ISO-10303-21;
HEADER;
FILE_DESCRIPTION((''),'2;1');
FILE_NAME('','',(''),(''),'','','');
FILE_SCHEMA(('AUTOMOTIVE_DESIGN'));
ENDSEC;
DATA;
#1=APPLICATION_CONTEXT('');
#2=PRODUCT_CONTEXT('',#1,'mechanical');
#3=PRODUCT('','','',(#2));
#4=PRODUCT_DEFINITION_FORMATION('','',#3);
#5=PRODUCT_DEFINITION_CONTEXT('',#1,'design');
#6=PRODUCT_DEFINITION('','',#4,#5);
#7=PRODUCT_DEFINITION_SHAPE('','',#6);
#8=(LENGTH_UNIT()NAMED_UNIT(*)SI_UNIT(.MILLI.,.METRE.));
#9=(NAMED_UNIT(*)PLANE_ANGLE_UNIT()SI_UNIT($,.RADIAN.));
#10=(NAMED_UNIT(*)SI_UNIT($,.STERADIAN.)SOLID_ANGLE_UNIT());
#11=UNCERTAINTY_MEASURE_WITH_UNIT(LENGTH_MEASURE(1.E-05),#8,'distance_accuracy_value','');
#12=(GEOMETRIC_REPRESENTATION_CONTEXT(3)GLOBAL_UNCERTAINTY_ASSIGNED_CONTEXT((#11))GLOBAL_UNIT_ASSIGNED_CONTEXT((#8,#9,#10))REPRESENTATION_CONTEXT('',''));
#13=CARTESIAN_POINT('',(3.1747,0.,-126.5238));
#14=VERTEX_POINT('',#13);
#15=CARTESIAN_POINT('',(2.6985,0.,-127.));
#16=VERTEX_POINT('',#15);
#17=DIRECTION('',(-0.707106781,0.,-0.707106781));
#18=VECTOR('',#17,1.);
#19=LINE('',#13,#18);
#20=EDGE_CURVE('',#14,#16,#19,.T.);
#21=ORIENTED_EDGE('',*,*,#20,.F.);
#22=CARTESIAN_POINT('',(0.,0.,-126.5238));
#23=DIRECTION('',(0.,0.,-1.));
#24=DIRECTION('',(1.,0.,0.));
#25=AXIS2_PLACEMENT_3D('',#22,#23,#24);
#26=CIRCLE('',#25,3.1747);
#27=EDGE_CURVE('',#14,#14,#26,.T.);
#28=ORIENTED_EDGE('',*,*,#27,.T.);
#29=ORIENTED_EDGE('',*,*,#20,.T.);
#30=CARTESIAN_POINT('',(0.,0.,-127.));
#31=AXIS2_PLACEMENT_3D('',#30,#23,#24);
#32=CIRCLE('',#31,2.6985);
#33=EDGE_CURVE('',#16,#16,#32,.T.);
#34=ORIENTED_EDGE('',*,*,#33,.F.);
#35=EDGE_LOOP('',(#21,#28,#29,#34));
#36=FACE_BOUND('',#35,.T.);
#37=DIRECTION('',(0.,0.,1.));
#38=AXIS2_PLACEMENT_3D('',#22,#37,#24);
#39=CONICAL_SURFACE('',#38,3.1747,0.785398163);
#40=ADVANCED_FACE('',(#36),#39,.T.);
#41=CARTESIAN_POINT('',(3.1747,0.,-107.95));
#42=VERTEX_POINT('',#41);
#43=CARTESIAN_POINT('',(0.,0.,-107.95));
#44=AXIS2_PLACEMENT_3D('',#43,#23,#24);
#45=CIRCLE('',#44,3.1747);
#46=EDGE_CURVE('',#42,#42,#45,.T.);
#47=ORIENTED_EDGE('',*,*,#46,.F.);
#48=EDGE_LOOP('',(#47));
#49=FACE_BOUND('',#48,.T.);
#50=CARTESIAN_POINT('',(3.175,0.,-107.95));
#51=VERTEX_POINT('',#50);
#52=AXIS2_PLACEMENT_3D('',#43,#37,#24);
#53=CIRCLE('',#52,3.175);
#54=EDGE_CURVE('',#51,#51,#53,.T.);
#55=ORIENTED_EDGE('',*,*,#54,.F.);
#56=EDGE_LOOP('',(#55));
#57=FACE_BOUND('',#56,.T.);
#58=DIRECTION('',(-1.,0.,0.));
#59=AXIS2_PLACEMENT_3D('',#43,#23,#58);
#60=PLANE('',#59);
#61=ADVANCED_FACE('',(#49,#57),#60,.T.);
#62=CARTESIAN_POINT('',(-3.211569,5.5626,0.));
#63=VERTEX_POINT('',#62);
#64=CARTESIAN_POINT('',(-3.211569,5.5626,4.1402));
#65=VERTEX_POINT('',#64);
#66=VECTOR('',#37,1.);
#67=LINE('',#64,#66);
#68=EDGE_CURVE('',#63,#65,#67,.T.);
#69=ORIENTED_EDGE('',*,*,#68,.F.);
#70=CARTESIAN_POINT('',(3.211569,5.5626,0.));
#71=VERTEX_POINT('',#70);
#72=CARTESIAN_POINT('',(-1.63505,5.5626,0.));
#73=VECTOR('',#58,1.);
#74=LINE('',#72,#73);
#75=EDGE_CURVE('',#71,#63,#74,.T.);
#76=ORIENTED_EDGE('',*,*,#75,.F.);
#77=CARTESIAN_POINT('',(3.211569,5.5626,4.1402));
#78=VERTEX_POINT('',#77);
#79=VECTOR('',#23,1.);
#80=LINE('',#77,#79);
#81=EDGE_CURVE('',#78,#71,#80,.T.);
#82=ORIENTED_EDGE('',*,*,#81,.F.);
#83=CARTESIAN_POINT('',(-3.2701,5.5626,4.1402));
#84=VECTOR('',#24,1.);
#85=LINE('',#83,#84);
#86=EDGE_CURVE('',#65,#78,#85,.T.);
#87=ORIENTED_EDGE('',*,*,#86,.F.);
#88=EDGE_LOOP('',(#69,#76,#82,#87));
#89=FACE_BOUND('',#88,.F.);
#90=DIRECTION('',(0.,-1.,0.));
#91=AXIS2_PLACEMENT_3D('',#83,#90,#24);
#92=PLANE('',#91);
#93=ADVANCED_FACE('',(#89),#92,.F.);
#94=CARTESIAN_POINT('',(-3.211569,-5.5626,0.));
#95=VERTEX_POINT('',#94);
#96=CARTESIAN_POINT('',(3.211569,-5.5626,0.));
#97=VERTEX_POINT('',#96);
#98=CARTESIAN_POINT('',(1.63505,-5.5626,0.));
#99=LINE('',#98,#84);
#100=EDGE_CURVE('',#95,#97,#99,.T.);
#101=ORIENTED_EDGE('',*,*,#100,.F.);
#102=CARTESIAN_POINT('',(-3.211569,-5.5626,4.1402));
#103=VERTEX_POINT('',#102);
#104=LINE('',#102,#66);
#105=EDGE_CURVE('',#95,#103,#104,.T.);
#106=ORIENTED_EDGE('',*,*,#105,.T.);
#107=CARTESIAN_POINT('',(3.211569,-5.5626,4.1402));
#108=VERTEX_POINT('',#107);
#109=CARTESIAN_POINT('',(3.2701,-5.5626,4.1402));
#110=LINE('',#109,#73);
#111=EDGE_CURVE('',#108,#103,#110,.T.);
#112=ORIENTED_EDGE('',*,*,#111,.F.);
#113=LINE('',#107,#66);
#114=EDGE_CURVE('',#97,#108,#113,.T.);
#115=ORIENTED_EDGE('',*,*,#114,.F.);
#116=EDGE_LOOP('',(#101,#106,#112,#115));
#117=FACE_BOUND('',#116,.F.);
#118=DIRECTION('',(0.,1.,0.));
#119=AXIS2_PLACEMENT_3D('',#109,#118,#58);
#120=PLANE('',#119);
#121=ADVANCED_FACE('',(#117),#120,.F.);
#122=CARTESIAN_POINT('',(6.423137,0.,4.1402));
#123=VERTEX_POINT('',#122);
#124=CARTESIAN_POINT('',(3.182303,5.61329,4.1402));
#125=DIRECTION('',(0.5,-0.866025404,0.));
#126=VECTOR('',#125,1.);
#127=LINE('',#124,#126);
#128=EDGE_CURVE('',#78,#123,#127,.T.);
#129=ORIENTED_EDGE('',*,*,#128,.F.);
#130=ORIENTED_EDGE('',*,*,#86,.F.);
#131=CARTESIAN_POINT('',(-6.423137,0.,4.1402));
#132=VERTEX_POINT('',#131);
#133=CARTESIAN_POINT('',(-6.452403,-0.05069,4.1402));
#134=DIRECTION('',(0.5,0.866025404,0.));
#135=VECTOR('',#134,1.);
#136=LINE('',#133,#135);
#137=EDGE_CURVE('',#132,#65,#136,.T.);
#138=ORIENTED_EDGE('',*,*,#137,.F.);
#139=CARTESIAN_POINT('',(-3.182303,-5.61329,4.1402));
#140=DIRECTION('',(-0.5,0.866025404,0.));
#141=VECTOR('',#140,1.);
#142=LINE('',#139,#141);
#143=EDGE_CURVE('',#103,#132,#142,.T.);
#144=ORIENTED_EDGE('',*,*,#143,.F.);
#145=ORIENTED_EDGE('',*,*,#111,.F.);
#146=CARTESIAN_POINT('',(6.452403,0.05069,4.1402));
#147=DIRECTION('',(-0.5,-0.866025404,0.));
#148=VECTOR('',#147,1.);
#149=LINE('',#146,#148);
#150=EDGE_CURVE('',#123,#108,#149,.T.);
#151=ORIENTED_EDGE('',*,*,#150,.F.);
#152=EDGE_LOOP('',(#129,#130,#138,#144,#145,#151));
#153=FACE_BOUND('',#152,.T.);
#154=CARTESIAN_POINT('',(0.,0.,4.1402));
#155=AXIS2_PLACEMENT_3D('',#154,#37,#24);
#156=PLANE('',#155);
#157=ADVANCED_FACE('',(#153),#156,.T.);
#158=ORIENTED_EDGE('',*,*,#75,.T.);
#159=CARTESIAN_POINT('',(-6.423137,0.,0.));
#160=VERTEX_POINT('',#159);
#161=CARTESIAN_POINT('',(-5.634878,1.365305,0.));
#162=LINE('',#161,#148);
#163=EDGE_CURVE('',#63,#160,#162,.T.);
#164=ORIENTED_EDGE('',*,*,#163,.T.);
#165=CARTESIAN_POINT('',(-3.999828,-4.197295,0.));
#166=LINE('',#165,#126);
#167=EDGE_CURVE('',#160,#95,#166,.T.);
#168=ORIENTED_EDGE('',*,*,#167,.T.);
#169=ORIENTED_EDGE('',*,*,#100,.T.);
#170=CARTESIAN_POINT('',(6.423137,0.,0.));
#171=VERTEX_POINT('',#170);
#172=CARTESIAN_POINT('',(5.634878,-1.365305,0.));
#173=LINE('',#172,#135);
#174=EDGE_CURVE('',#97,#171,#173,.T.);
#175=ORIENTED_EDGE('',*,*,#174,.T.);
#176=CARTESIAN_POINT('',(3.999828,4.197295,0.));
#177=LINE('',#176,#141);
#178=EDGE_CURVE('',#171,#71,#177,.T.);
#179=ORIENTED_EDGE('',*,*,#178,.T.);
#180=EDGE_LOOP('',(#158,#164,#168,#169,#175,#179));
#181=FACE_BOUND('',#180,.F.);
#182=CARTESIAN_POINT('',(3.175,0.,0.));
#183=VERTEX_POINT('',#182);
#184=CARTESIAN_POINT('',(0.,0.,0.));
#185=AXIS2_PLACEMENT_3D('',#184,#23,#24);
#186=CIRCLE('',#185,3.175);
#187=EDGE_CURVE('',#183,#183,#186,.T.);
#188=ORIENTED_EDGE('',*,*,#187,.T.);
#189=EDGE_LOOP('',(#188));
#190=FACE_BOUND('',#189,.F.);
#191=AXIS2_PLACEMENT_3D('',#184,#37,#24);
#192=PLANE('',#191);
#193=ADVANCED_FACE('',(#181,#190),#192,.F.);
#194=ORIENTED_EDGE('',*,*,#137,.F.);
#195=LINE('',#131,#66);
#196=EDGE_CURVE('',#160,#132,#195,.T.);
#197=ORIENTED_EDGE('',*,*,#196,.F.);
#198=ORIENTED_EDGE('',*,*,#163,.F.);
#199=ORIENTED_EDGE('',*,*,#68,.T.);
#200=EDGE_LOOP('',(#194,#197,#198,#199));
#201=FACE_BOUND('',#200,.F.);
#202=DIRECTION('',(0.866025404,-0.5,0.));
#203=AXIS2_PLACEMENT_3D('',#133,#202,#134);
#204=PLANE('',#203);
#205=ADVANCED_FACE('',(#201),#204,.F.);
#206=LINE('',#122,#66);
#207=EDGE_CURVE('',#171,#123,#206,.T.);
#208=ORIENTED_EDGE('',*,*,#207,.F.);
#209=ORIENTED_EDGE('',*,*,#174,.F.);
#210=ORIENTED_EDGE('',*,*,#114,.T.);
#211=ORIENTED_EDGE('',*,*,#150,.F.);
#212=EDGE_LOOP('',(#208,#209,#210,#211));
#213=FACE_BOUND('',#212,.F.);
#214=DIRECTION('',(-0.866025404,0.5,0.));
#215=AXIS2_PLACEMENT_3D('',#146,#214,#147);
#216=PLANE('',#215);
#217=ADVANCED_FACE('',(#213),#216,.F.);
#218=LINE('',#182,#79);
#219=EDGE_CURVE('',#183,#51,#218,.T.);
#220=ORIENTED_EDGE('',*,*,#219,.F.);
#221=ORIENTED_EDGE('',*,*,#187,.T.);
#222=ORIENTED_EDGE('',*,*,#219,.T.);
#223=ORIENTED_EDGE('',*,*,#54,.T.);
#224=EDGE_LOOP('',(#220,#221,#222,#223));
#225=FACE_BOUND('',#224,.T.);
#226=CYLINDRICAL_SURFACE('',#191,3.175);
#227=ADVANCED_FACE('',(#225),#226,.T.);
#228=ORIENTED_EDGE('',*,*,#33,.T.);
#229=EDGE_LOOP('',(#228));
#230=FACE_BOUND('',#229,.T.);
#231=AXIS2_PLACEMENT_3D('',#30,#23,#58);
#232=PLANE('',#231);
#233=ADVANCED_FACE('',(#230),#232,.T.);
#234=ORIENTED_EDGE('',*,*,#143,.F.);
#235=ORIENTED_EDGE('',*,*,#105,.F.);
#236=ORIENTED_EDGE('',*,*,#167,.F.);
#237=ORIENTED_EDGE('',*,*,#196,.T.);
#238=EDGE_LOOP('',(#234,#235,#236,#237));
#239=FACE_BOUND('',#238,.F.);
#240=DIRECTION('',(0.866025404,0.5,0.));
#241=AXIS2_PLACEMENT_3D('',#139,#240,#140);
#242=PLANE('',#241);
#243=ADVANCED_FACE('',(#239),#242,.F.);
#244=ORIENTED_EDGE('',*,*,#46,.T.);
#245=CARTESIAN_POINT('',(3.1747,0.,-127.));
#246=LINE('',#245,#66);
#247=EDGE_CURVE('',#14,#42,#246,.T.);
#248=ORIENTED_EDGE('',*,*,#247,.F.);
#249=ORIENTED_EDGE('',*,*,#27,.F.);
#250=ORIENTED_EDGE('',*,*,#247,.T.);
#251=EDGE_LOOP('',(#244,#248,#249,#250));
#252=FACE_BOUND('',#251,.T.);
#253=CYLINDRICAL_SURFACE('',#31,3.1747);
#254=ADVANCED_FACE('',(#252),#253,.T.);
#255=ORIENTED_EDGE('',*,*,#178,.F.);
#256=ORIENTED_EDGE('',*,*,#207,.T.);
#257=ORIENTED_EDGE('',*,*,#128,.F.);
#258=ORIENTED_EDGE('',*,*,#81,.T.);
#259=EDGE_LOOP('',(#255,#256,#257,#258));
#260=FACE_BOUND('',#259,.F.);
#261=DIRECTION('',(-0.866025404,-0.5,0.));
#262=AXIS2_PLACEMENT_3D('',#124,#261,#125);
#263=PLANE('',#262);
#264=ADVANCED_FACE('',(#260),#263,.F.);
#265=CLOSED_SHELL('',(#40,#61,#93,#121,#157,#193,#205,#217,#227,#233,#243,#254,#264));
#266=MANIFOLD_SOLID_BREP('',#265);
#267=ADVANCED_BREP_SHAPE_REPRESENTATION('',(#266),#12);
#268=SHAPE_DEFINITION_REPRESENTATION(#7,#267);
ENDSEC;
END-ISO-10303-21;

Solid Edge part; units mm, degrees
sketch "Sketch1" plane through (0, 0, 0) normal (0, 0, 1) x (1, 0, 0)
  circle A0 centre (0, 0) radius 6.4526
  dimension "D1" = 12.9052
extrude "Protrusion1" add sketch "Sketch1" along normal blind 4.1402
sketch "Sketch2" plane through (0, 0, 0) normal (0, 0, -1) x (1, 0, 0)
  circle A0 centre (0, 0) radius 3.175
extrude "Protrusion2" add sketch "Sketch2" along normal blind 127
sketch "Sketch3" plane through (0, 0, -127) normal (0, 0, -1) x (1, 0, 0)
  circle A0 centre (0, 0) radius 3.1747
extrude "Cutout1" cut sketch "Sketch3" against normal blind 19.05 flip side to cut
chamfer "Chamfer_1" distance 0.4762 angle 45 1 edges at (-3.1747, 0, -127)
sketch "Sketch4" plane through (0, 0, 4.1402) normal (0, 0, 1) x (1, 0, 0)
  line L0 (-3.2701, 5.5626) -> (3.2701, 5.5626)
  dimension "D1" = 11.1252
extrude "Cutout2" cut sketch "Sketch4" against normal up to next material side at (0, 5.6126, 4.1402)
pattern_circular "Pattern1" count 6 over 360 about axis through (0, 0, 4.1402) along (0, 0, 1) of "Cutout2"
properties part number "24101743"
